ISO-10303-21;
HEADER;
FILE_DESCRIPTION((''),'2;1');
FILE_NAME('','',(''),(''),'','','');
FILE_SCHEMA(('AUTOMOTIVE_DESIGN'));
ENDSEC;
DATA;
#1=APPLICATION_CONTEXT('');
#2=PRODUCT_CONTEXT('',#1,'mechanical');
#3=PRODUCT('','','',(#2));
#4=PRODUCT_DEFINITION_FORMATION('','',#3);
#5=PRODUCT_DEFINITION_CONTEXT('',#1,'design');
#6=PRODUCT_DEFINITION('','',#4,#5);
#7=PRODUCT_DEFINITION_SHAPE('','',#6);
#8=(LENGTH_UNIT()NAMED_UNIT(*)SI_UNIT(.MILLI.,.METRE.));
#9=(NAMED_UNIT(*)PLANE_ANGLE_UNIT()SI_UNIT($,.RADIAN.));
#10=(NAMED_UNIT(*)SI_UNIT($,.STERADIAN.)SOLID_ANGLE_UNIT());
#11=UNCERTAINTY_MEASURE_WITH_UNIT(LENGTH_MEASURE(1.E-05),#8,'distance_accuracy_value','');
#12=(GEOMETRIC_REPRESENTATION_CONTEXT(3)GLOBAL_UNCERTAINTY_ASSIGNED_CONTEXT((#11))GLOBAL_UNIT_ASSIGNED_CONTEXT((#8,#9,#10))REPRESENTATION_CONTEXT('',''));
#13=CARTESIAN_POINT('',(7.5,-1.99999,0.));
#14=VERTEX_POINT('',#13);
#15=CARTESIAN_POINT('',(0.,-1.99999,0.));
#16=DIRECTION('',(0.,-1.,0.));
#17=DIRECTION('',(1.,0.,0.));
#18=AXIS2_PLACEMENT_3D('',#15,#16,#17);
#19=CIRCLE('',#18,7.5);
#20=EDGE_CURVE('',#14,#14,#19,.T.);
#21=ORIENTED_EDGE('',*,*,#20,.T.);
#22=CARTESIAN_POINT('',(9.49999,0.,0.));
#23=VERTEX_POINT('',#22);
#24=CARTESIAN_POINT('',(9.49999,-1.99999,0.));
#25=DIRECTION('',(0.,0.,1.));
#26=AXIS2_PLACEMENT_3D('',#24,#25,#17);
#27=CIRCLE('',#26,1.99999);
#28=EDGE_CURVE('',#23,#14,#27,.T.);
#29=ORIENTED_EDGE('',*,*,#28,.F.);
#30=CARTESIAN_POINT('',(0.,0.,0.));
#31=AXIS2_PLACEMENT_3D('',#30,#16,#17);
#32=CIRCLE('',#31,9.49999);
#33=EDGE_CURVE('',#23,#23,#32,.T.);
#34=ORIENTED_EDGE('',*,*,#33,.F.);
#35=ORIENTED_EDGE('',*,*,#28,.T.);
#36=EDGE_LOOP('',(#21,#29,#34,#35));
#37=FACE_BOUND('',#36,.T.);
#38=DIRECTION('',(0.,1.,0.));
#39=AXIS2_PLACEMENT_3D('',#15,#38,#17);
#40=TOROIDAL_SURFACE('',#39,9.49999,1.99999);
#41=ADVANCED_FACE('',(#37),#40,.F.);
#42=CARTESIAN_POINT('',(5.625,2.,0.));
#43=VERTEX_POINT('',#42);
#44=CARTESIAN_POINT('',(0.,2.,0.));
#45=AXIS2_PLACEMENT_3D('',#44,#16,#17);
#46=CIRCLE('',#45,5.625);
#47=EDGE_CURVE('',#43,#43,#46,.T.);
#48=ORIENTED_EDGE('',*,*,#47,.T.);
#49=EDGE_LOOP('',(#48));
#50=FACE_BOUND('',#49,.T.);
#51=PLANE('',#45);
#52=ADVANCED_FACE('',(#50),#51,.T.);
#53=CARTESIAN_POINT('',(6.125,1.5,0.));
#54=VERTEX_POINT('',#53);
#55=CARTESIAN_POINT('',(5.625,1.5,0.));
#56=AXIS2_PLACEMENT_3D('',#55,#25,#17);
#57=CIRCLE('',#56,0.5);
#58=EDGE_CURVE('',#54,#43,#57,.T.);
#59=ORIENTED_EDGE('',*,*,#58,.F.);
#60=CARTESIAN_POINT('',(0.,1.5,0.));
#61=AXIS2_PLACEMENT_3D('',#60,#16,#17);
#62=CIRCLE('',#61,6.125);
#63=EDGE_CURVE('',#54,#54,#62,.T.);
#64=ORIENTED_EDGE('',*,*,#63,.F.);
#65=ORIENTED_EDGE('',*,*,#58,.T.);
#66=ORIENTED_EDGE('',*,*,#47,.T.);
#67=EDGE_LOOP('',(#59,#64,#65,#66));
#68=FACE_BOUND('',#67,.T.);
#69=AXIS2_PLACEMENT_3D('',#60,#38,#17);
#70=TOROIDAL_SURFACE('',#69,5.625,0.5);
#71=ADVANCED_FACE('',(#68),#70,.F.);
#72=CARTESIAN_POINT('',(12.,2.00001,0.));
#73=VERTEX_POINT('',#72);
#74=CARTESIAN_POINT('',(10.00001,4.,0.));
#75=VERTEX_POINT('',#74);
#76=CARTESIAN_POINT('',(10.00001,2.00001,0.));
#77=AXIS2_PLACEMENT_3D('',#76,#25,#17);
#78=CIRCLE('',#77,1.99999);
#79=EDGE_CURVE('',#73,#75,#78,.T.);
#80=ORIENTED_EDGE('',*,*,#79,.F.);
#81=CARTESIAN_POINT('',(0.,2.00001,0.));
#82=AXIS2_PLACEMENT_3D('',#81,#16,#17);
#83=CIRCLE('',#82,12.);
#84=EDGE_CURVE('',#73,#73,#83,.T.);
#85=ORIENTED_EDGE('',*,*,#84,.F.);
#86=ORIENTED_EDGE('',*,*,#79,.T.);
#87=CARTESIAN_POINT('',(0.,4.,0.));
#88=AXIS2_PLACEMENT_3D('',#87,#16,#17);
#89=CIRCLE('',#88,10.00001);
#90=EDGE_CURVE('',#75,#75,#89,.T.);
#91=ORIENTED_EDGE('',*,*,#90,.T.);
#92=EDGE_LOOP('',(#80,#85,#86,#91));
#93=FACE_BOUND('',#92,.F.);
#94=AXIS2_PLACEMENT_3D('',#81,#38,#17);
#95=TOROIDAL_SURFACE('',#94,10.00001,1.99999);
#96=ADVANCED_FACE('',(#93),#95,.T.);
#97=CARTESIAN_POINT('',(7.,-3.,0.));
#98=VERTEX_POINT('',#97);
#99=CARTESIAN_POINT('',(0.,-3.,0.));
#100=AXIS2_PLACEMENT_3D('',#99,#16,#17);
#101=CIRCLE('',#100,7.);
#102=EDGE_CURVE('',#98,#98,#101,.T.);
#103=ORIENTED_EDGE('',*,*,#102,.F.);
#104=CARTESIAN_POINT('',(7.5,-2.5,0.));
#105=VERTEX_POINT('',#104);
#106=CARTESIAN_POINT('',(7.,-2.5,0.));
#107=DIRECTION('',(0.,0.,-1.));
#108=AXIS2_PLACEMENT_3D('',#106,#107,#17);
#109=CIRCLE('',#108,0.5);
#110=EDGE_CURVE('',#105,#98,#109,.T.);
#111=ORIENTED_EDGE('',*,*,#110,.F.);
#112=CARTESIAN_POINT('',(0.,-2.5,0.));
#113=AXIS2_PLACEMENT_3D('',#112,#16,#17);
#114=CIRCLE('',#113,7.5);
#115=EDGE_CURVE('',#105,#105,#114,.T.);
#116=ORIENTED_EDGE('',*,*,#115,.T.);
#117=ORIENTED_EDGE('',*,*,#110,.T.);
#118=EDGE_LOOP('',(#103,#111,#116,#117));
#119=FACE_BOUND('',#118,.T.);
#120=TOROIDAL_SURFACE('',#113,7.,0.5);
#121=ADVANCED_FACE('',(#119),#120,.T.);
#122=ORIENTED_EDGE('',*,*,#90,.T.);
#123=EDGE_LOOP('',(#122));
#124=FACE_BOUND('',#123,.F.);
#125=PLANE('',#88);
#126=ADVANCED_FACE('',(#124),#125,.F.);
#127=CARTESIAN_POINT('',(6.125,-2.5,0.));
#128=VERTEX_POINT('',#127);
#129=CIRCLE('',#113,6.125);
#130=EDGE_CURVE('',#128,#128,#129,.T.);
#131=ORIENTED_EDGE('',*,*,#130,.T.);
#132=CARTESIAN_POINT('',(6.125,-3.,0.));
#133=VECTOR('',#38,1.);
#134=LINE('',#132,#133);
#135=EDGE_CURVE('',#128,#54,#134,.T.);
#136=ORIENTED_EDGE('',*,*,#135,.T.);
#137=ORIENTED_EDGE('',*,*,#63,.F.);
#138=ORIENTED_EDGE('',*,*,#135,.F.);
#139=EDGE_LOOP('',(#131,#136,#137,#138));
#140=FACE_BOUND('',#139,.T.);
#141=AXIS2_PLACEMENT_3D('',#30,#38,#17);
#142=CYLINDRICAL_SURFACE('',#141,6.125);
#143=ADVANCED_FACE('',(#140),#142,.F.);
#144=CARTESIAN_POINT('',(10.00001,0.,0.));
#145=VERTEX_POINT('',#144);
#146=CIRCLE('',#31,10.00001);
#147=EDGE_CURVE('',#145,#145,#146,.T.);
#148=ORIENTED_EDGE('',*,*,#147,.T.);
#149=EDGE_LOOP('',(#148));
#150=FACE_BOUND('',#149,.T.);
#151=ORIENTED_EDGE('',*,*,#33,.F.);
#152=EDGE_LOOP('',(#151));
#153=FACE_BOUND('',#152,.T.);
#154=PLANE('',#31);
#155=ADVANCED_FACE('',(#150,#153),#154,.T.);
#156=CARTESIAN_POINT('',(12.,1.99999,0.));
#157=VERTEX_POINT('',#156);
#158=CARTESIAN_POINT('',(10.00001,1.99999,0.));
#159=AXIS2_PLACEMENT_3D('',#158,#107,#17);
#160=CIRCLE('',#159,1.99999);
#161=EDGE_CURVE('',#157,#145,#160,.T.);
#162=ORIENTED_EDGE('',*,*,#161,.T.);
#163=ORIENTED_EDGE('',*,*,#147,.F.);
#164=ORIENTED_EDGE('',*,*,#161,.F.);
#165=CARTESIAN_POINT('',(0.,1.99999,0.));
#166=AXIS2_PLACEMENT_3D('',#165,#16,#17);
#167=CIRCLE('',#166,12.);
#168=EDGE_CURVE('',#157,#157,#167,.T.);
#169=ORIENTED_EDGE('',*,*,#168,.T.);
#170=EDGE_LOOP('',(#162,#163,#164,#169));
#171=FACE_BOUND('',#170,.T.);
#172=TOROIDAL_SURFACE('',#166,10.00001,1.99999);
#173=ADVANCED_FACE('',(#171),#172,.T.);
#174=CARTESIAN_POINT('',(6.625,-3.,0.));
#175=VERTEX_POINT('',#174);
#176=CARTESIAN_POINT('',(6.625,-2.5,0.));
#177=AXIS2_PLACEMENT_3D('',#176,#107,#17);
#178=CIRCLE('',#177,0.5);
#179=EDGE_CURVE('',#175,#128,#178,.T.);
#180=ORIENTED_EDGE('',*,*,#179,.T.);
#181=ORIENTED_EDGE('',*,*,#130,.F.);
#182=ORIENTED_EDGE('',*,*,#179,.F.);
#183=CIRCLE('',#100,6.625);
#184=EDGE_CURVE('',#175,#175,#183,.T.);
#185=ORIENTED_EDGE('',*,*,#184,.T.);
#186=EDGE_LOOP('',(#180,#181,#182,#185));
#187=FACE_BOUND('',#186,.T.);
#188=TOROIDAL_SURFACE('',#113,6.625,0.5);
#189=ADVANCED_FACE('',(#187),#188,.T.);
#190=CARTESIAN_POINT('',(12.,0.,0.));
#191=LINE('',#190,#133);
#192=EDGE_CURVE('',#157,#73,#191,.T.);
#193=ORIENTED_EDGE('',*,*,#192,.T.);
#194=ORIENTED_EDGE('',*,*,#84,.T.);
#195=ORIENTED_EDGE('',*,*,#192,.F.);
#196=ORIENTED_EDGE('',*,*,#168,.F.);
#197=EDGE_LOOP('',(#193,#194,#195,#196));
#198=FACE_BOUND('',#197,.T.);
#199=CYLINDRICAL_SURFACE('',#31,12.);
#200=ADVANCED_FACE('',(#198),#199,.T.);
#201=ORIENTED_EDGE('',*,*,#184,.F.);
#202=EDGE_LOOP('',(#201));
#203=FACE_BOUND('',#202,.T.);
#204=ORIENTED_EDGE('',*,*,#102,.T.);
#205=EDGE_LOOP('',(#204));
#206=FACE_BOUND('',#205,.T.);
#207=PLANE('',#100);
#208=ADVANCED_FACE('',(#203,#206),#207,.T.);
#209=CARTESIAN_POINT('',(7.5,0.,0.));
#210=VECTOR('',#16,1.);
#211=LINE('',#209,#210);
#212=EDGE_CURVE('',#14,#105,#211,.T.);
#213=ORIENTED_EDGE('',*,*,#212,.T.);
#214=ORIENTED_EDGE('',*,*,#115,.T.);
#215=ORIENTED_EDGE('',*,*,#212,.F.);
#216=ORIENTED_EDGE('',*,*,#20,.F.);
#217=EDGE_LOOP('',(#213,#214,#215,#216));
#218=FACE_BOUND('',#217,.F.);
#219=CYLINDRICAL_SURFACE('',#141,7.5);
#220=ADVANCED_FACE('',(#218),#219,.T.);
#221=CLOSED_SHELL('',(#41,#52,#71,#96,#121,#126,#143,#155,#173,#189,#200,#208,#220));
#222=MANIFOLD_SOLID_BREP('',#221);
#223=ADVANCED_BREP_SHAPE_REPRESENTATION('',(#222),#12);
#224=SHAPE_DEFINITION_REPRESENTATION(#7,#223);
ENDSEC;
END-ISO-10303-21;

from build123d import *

# Parameters (mm, degrees)
F0_R     = 12
F0_R_2   = 7.5
F0_R_3   = 6.125
F1_DEPTH = 4
F2_DEPTH = 3
F3_DEPTH = 2
F4_R     = 1.99999
F5_R     = 0.5


# Not quite as in the source:
# - a fillet or chamfer is up to 0.001 mm smaller than in the source, because OpenCascade refuses the exact size


with BuildPart() as f1:
    # F0 (on Front) → F1 (new body)
    with BuildSketch(Plane.XZ):
        Circle(F0_R)
        Circle(F0_R_2, mode=Mode.SUBTRACT)
        Circle(F0_R_2)
        Circle(F0_R_3, mode=Mode.SUBTRACT)
        Circle(F0_R_3)
    extrude(amount=-F1_DEPTH)

    # F0 (on Front) → F2 (join)
    with BuildSketch(Plane.XZ):
        Circle(F0_R_2)
        Circle(F0_R_3, mode=Mode.SUBTRACT)
    extrude(amount=F2_DEPTH)

    # F0 (on Front) → F3 (cut)
    with BuildSketch(Plane.XZ):
        Circle(F0_R_3)
    extrude(amount=-F3_DEPTH, mode=Mode.SUBTRACT)

    # F4 (radius 2 in the source; OpenCascade refuses exactly that, so slightly less here)
    f4_edges = [f1.edges().sort_by_distance(p)[0] for p in [
        (-7.5, 0, 0),
        (-12, 0, 0),
        (-12, 4, 0),
    ]]
    fillet(f4_edges, radius=F4_R)

    # F5
    f5_edges = [f1.edges().sort_by_distance(p)[0] for p in [
        (-7.5, -3, 0),
        (-6.125, -3, 0),
        (-6.125, 2, 0),
    ]]
    fillet(f5_edges, radius=F5_R)


solid = f1.part
